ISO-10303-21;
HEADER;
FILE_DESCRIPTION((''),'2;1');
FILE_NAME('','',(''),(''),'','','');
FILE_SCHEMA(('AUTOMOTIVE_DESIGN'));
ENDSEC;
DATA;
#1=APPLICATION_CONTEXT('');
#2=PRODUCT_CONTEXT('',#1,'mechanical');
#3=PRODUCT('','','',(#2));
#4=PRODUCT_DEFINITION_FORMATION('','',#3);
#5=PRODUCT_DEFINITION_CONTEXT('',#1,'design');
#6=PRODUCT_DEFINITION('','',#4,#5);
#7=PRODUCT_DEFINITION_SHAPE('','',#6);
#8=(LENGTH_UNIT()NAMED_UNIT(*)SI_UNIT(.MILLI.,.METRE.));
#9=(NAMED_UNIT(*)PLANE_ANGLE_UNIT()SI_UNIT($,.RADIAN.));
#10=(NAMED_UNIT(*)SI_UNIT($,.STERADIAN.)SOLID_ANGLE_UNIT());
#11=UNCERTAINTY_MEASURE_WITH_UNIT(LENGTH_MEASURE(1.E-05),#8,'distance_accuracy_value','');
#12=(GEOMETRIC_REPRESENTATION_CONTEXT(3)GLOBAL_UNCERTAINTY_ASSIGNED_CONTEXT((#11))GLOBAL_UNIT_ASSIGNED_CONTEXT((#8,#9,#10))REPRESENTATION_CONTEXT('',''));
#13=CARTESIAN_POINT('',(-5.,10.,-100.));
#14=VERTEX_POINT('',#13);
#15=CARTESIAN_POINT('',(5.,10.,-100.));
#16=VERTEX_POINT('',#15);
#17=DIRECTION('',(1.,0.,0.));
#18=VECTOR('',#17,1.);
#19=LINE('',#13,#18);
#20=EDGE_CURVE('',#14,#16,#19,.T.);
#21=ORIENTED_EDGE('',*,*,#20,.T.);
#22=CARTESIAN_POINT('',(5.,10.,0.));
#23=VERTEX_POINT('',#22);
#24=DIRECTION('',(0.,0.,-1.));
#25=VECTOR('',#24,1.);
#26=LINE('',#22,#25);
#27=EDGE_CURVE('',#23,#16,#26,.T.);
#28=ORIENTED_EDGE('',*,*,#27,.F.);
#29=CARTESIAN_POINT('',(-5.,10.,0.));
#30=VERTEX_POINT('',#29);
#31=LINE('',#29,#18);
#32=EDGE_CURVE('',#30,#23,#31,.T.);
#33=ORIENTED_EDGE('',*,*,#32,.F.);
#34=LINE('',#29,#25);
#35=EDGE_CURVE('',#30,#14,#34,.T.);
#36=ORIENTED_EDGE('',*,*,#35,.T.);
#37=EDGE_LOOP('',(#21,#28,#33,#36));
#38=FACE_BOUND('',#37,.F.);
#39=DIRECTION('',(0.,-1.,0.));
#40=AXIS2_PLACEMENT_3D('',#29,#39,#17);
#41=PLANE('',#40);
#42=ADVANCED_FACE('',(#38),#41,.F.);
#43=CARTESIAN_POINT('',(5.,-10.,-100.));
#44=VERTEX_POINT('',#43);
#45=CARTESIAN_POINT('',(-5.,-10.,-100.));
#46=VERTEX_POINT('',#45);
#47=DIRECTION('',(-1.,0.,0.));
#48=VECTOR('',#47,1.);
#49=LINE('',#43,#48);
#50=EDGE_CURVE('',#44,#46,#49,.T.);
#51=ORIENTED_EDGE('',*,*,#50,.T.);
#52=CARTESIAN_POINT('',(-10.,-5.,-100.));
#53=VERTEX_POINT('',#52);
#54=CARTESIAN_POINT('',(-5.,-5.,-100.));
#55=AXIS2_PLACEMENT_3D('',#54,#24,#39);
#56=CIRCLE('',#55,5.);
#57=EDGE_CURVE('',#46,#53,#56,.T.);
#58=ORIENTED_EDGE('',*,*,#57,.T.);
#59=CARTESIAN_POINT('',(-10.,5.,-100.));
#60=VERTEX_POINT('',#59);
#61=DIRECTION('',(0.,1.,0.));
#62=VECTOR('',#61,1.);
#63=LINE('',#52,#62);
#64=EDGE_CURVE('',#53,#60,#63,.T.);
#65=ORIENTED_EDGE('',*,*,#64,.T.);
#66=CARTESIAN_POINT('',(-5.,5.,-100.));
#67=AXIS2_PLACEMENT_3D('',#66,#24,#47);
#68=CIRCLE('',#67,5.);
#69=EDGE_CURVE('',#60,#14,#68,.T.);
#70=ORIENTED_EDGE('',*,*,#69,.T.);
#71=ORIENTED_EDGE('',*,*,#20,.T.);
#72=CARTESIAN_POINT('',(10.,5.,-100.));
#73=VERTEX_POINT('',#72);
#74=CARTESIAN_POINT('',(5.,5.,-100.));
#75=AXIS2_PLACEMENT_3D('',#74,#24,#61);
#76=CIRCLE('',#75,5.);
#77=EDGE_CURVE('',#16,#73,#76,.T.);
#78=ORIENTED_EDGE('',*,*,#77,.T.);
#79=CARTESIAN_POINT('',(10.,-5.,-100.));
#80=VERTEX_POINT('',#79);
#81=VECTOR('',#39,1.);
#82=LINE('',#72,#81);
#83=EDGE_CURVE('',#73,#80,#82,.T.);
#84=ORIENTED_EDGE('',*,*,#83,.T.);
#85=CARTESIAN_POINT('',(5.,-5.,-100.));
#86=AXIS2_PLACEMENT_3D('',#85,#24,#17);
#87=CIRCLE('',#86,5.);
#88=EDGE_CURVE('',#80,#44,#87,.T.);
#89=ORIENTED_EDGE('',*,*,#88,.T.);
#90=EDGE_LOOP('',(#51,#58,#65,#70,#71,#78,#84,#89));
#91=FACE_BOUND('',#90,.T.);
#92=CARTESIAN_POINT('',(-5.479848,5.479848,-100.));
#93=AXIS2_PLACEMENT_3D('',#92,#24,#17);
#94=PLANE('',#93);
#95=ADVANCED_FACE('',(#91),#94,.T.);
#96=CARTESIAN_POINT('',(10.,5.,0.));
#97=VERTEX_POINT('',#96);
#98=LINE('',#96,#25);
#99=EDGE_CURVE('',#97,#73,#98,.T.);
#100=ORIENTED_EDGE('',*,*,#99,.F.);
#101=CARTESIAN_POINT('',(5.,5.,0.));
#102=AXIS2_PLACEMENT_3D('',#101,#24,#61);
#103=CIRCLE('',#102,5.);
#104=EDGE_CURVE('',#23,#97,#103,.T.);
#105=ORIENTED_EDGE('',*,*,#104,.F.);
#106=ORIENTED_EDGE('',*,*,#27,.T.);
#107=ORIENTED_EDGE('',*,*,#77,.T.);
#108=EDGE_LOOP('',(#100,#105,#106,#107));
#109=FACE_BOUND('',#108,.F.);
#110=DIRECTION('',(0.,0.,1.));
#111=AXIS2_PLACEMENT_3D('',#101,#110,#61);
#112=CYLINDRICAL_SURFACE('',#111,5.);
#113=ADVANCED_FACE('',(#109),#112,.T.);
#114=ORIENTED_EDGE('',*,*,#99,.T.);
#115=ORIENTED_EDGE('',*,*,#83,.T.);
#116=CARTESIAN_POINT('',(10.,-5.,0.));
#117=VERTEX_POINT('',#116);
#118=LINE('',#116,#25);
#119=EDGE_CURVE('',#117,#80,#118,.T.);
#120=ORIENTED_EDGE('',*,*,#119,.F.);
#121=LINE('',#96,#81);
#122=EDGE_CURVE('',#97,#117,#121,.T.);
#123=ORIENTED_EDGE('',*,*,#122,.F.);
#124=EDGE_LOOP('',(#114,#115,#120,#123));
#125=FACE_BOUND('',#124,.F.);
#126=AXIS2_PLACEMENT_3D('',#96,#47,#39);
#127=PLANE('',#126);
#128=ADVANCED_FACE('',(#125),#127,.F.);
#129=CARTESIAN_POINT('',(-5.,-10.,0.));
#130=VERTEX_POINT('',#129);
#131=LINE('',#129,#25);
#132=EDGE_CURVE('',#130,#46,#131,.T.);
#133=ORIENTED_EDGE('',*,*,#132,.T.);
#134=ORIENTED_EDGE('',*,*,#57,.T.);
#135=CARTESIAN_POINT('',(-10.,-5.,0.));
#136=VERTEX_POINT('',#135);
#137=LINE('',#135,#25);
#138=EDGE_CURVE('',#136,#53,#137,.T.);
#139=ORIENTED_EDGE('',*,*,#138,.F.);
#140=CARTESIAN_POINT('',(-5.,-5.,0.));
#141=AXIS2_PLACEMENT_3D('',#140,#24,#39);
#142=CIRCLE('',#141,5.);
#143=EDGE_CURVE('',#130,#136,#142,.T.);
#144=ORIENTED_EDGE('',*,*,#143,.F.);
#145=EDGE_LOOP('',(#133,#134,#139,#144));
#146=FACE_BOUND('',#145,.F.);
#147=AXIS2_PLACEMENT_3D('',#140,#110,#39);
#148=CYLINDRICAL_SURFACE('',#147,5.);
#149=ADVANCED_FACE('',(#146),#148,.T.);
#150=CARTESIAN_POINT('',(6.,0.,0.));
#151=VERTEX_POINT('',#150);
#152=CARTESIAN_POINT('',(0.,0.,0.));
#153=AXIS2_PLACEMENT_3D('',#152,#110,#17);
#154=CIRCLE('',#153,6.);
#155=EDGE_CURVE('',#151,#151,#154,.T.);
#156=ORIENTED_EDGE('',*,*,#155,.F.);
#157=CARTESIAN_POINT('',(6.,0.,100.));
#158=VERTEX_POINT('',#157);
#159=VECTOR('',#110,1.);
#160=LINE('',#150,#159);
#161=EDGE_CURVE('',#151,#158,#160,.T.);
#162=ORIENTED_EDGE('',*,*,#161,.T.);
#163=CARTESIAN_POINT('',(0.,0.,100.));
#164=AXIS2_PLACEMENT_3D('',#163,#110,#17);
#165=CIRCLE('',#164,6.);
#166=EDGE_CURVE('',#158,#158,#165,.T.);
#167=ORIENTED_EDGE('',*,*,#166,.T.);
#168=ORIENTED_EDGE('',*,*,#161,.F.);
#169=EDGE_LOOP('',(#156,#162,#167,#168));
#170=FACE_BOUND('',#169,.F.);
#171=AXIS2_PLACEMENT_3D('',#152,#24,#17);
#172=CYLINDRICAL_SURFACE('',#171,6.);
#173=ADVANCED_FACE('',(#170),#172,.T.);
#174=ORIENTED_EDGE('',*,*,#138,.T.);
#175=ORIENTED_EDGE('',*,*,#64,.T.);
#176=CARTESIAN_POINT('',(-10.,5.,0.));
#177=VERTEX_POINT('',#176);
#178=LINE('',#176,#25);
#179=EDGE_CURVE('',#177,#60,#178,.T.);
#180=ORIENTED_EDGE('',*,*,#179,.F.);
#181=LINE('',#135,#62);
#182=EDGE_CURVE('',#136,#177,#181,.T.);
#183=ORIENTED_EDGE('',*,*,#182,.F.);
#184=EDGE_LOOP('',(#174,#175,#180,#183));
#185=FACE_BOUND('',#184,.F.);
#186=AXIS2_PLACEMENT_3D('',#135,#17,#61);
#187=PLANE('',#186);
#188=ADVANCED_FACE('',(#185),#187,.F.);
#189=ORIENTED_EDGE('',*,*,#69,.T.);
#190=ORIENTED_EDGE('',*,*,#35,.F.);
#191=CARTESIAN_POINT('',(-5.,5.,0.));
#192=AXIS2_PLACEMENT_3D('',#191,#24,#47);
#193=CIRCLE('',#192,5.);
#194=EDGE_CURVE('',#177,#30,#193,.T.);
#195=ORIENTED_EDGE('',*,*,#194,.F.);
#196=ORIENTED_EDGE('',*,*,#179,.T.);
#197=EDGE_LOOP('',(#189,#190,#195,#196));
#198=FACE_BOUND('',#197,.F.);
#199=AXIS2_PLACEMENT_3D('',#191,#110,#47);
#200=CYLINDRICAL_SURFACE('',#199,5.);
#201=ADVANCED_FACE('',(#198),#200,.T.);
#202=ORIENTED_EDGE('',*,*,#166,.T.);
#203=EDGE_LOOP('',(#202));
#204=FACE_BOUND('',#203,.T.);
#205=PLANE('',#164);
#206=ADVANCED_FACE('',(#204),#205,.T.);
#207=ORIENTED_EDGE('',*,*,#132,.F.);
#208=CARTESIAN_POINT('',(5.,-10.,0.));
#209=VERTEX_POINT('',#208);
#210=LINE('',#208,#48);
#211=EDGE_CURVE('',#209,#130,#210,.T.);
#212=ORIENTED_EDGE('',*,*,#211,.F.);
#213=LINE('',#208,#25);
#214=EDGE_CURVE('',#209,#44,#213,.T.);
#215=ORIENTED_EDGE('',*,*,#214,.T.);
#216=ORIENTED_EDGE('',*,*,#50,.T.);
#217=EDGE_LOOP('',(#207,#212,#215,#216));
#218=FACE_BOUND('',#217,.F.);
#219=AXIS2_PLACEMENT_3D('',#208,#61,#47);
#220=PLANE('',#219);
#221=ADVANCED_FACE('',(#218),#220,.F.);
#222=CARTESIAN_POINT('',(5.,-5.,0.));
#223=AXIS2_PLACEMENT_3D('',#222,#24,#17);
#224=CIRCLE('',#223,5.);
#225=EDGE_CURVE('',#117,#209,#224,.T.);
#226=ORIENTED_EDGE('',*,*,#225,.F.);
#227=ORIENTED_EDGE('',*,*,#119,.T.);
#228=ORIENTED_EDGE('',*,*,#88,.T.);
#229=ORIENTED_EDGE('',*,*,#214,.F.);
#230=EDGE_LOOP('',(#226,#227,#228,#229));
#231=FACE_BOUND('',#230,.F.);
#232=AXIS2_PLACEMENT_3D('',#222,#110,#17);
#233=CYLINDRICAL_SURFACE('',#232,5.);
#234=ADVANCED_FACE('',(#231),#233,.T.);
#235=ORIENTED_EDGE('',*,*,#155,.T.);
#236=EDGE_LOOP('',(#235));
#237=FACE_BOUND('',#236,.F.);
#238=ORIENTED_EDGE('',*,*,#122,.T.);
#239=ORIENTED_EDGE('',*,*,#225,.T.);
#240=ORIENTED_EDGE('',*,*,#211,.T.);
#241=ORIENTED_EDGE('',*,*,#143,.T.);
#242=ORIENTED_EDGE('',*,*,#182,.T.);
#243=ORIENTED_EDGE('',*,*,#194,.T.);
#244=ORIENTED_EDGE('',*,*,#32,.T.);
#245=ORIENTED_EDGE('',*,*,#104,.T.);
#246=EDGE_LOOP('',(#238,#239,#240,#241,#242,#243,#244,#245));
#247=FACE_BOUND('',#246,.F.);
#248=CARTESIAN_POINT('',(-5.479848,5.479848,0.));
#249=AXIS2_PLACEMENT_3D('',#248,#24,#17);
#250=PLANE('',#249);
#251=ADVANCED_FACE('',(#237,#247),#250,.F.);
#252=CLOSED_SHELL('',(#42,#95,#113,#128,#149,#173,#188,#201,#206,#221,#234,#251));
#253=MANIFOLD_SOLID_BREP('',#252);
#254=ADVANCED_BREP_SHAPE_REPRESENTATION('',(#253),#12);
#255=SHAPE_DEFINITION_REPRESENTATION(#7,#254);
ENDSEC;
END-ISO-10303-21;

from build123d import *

# Parameters (mm, degrees)
F0_R     = 6
F1_DEPTH = 100
F3_DEPTH = 100


with BuildPart() as f1:
    # F0 (on Top) → F1 (new body)
    with BuildSketch(Plane.XY):
        Circle(F0_R)
    extrude(amount=F1_DEPTH)

    # F2 (on face) → F3 (join)
    with BuildSketch(Plane(origin=(0, 0, 0), x_dir=(1, 0, 0), z_dir=(0, 0, -1))):
        with BuildLine():
            ThreePointArc((0, -6), (-4.2426406871, -4.2426406871), (-6, 0))
            Line((-6, 0), (-10, 0))
            Line((-10, 0), (-10, -5))
            ThreePointArc((-10, -5), (-8.5355339059, -8.5355339059), (-5, -10))
            Line((-5, -10), (0, -10))
            Line((0, -10), (0, -6))
        make_face()
        with BuildLine():
            Line((-10, 0), (-6, 0))
            ThreePointArc((-6, 0), (-4.2426406871, 4.2426406871), (0, 6))
            Line((0, 6), (0, 10))
            Line((0, 10), (-5, 10))
            ThreePointArc((-5, 10), (-8.5355339059, 8.5355339059), (-10, 5))
            Line((-10, 5), (-10, 0))
        make_face()
        with BuildLine():
            ThreePointArc((0, 6), (-4.2426406871, 4.2426406871), (-6, 0))
            ThreePointArc((-6, 0), (-4.2426406871, -4.2426406871), (0, -6))
            ThreePointArc((0, -6), (4.2426406871, -4.2426406871), (6, 0))
            ThreePointArc((6, 0), (4.2426406871, 4.2426406871), (0, 6))
        make_face()
        with BuildLine():
            Line((0, 10), (0, 6))
            ThreePointArc((0, 6), (4.2426406871, 4.2426406871), (6, 0))
            Line((6, 0), (10, 0))
            Line((10, 0), (10, 5))
            ThreePointArc((10, 5), (8.5355339059, 8.5355339059), (5, 10))
            Line((5, 10), (0, 10))
        make_face()
        with BuildLine():
            ThreePointArc((6, 0), (4.2426406871, -4.2426406871), (0, -6))
            Line((0, -6), (0, -10))
            Line((0, -10), (5, -10))
            ThreePointArc((5, -10), (8.5355339059, -8.5355339059), (10, -5))
            Line((10, -5), (10, 0))
            Line((10, 0), (6, 0))
        make_face()
    extrude(amount=F3_DEPTH)


solid = f1.part
